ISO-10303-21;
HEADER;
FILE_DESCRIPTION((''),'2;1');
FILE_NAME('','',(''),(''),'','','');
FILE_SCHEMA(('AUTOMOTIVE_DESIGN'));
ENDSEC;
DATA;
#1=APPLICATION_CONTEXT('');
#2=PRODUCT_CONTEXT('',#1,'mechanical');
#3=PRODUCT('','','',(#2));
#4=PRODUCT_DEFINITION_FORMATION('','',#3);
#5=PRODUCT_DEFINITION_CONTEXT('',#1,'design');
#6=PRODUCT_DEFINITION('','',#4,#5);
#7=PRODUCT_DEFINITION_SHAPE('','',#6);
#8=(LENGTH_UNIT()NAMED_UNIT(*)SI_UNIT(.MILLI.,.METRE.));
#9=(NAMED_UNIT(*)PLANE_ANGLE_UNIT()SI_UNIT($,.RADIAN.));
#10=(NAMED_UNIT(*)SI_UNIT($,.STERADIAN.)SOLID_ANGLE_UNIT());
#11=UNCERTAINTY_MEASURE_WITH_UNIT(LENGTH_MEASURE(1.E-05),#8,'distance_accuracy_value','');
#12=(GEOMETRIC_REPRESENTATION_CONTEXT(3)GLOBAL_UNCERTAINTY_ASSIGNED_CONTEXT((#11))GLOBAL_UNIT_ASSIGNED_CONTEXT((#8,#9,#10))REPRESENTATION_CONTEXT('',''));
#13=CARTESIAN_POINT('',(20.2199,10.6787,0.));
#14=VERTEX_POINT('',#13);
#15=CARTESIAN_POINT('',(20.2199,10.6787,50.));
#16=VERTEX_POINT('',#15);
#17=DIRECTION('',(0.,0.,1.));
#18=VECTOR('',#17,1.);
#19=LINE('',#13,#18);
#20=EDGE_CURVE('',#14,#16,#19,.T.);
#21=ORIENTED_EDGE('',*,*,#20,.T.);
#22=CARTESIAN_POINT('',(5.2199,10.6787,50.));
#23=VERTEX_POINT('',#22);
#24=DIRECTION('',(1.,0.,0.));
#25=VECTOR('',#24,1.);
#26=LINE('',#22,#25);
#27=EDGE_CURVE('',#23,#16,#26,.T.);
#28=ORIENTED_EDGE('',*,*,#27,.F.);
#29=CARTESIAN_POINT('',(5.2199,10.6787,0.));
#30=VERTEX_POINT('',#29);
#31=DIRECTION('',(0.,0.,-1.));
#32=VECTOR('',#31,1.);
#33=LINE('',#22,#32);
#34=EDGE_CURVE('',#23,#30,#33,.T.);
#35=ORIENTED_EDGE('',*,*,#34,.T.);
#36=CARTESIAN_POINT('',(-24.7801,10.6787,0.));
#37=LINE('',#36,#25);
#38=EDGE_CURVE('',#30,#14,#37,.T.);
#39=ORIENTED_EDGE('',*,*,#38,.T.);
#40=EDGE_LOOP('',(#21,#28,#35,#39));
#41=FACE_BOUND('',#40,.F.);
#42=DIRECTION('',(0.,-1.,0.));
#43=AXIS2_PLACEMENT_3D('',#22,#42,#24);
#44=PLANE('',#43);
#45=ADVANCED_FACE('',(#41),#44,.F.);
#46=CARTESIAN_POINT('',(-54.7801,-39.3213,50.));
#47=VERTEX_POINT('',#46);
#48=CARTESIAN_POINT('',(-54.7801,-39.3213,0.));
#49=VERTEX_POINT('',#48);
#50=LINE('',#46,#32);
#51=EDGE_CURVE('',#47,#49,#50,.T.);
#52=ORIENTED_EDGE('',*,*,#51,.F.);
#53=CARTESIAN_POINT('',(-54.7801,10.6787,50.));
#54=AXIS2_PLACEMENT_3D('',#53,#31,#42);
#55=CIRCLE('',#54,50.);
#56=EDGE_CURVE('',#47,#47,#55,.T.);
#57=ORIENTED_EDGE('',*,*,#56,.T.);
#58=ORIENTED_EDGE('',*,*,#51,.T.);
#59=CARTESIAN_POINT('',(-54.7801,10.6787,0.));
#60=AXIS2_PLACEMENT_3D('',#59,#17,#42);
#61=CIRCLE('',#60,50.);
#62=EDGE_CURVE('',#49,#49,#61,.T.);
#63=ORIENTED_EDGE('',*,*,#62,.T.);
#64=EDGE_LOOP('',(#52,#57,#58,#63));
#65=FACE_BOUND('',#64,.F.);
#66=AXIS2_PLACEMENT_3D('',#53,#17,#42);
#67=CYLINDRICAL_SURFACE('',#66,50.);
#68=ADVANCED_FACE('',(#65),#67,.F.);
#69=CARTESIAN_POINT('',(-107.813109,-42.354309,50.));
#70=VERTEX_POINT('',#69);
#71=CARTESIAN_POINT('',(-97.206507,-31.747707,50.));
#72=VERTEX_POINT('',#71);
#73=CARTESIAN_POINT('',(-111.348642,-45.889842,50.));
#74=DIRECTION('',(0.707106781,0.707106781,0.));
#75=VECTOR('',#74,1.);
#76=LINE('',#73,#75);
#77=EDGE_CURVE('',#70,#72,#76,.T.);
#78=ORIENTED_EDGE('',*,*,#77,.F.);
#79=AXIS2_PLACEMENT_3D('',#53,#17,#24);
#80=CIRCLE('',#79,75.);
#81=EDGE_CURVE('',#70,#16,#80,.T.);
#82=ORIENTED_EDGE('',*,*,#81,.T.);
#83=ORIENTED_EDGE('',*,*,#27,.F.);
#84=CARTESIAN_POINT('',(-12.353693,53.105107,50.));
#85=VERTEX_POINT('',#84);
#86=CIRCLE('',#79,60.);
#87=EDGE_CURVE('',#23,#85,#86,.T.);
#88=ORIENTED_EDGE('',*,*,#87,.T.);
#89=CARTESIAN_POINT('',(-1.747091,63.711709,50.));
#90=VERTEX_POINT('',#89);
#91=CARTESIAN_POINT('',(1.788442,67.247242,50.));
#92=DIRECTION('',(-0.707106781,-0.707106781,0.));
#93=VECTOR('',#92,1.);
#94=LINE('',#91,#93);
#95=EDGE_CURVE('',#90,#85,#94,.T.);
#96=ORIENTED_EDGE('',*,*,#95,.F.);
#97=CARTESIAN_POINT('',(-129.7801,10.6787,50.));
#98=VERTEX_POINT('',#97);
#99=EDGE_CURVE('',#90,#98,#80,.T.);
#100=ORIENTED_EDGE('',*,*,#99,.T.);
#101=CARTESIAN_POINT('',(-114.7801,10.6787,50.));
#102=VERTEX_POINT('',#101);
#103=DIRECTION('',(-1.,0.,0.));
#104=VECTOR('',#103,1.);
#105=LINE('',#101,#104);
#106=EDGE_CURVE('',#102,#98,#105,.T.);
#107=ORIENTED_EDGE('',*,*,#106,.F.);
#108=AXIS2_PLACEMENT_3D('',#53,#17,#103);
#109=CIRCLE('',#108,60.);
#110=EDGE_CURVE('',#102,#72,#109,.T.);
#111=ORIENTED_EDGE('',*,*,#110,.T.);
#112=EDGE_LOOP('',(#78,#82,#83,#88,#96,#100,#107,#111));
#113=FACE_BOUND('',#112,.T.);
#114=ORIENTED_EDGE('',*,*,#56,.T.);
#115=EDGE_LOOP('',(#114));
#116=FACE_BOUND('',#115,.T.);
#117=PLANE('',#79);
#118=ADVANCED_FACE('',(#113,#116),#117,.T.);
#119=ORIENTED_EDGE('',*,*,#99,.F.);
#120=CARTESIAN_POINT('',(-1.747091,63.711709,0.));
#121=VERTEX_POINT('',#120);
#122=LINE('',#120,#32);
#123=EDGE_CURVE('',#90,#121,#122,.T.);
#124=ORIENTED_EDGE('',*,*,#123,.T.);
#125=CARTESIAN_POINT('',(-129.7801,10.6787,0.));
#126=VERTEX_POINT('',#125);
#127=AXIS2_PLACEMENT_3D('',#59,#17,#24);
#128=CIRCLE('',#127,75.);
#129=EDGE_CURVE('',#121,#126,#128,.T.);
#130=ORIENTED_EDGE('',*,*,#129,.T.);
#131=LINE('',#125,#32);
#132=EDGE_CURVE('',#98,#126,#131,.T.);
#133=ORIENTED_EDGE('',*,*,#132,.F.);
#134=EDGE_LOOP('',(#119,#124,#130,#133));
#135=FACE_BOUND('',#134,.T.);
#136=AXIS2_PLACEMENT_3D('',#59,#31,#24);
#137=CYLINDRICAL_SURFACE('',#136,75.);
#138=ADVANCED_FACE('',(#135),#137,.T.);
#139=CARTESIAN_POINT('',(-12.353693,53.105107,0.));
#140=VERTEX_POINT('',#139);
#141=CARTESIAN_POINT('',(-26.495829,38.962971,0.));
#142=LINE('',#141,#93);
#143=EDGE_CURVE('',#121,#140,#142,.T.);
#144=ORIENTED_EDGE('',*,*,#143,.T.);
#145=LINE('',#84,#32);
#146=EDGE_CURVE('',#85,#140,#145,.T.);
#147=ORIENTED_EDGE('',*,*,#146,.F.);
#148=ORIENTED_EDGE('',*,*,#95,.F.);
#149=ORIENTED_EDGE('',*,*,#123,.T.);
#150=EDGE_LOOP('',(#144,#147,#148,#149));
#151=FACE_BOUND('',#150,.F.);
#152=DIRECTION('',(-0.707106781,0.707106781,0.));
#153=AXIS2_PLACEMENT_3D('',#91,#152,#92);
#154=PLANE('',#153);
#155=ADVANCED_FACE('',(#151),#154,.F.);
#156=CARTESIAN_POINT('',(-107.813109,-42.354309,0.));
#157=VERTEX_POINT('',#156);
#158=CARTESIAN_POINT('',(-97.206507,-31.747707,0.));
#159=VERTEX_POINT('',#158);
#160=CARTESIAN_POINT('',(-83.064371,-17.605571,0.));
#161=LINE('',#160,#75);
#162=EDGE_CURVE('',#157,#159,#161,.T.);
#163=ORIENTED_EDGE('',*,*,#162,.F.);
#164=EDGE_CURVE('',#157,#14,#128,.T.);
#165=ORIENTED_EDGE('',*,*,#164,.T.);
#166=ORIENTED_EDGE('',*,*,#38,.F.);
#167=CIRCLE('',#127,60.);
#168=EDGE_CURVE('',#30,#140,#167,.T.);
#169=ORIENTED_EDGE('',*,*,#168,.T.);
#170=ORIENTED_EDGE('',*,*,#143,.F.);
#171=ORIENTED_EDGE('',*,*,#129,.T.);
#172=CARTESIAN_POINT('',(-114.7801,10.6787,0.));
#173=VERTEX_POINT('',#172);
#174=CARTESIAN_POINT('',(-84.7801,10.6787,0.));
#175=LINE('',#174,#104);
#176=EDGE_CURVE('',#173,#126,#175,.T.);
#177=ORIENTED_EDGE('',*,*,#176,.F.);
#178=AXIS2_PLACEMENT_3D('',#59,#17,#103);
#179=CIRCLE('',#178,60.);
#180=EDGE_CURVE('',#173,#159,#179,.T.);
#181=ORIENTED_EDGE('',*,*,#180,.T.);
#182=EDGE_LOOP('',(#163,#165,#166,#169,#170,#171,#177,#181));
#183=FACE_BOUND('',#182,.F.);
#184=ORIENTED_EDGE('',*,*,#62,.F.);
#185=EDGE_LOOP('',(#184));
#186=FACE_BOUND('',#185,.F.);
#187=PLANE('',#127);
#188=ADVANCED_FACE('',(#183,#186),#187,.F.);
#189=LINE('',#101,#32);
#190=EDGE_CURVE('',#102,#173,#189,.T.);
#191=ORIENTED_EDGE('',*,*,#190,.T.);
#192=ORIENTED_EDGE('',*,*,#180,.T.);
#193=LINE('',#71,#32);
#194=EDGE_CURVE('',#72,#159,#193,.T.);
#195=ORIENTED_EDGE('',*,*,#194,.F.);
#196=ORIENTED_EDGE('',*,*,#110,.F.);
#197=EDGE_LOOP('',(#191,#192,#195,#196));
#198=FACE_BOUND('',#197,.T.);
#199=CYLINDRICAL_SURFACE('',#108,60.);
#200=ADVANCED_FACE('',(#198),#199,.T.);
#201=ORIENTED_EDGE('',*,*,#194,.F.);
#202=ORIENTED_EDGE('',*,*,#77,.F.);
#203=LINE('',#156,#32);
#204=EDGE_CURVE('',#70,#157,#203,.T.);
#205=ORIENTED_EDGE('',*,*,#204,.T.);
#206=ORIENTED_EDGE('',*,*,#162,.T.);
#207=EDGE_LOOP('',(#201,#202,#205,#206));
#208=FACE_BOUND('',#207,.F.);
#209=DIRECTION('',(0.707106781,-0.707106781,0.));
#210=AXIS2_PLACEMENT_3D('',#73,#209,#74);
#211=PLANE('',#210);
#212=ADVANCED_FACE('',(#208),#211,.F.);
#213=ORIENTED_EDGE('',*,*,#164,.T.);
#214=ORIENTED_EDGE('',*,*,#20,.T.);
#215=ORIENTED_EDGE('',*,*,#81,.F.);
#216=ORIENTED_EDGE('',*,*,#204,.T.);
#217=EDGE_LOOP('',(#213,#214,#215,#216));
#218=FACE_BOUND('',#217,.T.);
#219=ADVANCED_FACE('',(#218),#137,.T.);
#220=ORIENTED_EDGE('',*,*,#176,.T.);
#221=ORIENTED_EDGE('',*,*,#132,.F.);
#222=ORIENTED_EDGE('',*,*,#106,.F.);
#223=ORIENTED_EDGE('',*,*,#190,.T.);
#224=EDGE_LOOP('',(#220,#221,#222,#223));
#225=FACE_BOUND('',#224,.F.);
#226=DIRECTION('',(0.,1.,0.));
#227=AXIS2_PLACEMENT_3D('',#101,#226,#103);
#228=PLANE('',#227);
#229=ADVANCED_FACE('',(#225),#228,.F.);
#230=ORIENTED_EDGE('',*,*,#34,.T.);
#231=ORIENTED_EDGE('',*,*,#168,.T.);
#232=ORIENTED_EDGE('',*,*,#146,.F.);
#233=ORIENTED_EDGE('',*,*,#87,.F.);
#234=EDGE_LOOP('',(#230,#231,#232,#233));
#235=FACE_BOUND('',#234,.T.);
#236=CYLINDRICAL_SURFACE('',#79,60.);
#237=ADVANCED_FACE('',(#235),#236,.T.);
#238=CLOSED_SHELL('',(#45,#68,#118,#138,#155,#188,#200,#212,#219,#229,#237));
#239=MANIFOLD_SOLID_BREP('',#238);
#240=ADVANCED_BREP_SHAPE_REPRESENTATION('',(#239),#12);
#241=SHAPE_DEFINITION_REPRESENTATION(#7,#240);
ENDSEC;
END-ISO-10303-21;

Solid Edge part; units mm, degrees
sketch "Sketch1" plane through (0, 0, 0) normal (0, 0, 1) x (1, 0, 0)
  circle A0 centre (-54.7801, 10.6787) radius 75
extrude "Protrusion1" add sketch "Sketch1" along normal blind 50
hole "Hole_1" at (-54.7801, 10.6787, 50) direction (0, 0, -1) diameter 100 end up to next
sketch "Sketch2" plane through (-54.7801, 10.6787, 50) normal (0, 0, 1) x (1, 0, 0)
  arc A0 (60, 0) -> (42.4264, 42.4264) centre (0, 0) ccw
  line L0 (56.5685, 56.5685) -> (42.4264, 42.4264)
  arc A1 (80, 0) -> (56.5685, 56.5685) centre (0, 0) ccw
  line L1 (60, 0) -> (80, 0)
extrude "Cutout1" cut sketch "Sketch2" against normal through all
pattern_circular "Pattern1" count 2 over 360 about axis through (-54.7801, 10.6787, 50) along (0, 0, -1) of "Cutout1"
